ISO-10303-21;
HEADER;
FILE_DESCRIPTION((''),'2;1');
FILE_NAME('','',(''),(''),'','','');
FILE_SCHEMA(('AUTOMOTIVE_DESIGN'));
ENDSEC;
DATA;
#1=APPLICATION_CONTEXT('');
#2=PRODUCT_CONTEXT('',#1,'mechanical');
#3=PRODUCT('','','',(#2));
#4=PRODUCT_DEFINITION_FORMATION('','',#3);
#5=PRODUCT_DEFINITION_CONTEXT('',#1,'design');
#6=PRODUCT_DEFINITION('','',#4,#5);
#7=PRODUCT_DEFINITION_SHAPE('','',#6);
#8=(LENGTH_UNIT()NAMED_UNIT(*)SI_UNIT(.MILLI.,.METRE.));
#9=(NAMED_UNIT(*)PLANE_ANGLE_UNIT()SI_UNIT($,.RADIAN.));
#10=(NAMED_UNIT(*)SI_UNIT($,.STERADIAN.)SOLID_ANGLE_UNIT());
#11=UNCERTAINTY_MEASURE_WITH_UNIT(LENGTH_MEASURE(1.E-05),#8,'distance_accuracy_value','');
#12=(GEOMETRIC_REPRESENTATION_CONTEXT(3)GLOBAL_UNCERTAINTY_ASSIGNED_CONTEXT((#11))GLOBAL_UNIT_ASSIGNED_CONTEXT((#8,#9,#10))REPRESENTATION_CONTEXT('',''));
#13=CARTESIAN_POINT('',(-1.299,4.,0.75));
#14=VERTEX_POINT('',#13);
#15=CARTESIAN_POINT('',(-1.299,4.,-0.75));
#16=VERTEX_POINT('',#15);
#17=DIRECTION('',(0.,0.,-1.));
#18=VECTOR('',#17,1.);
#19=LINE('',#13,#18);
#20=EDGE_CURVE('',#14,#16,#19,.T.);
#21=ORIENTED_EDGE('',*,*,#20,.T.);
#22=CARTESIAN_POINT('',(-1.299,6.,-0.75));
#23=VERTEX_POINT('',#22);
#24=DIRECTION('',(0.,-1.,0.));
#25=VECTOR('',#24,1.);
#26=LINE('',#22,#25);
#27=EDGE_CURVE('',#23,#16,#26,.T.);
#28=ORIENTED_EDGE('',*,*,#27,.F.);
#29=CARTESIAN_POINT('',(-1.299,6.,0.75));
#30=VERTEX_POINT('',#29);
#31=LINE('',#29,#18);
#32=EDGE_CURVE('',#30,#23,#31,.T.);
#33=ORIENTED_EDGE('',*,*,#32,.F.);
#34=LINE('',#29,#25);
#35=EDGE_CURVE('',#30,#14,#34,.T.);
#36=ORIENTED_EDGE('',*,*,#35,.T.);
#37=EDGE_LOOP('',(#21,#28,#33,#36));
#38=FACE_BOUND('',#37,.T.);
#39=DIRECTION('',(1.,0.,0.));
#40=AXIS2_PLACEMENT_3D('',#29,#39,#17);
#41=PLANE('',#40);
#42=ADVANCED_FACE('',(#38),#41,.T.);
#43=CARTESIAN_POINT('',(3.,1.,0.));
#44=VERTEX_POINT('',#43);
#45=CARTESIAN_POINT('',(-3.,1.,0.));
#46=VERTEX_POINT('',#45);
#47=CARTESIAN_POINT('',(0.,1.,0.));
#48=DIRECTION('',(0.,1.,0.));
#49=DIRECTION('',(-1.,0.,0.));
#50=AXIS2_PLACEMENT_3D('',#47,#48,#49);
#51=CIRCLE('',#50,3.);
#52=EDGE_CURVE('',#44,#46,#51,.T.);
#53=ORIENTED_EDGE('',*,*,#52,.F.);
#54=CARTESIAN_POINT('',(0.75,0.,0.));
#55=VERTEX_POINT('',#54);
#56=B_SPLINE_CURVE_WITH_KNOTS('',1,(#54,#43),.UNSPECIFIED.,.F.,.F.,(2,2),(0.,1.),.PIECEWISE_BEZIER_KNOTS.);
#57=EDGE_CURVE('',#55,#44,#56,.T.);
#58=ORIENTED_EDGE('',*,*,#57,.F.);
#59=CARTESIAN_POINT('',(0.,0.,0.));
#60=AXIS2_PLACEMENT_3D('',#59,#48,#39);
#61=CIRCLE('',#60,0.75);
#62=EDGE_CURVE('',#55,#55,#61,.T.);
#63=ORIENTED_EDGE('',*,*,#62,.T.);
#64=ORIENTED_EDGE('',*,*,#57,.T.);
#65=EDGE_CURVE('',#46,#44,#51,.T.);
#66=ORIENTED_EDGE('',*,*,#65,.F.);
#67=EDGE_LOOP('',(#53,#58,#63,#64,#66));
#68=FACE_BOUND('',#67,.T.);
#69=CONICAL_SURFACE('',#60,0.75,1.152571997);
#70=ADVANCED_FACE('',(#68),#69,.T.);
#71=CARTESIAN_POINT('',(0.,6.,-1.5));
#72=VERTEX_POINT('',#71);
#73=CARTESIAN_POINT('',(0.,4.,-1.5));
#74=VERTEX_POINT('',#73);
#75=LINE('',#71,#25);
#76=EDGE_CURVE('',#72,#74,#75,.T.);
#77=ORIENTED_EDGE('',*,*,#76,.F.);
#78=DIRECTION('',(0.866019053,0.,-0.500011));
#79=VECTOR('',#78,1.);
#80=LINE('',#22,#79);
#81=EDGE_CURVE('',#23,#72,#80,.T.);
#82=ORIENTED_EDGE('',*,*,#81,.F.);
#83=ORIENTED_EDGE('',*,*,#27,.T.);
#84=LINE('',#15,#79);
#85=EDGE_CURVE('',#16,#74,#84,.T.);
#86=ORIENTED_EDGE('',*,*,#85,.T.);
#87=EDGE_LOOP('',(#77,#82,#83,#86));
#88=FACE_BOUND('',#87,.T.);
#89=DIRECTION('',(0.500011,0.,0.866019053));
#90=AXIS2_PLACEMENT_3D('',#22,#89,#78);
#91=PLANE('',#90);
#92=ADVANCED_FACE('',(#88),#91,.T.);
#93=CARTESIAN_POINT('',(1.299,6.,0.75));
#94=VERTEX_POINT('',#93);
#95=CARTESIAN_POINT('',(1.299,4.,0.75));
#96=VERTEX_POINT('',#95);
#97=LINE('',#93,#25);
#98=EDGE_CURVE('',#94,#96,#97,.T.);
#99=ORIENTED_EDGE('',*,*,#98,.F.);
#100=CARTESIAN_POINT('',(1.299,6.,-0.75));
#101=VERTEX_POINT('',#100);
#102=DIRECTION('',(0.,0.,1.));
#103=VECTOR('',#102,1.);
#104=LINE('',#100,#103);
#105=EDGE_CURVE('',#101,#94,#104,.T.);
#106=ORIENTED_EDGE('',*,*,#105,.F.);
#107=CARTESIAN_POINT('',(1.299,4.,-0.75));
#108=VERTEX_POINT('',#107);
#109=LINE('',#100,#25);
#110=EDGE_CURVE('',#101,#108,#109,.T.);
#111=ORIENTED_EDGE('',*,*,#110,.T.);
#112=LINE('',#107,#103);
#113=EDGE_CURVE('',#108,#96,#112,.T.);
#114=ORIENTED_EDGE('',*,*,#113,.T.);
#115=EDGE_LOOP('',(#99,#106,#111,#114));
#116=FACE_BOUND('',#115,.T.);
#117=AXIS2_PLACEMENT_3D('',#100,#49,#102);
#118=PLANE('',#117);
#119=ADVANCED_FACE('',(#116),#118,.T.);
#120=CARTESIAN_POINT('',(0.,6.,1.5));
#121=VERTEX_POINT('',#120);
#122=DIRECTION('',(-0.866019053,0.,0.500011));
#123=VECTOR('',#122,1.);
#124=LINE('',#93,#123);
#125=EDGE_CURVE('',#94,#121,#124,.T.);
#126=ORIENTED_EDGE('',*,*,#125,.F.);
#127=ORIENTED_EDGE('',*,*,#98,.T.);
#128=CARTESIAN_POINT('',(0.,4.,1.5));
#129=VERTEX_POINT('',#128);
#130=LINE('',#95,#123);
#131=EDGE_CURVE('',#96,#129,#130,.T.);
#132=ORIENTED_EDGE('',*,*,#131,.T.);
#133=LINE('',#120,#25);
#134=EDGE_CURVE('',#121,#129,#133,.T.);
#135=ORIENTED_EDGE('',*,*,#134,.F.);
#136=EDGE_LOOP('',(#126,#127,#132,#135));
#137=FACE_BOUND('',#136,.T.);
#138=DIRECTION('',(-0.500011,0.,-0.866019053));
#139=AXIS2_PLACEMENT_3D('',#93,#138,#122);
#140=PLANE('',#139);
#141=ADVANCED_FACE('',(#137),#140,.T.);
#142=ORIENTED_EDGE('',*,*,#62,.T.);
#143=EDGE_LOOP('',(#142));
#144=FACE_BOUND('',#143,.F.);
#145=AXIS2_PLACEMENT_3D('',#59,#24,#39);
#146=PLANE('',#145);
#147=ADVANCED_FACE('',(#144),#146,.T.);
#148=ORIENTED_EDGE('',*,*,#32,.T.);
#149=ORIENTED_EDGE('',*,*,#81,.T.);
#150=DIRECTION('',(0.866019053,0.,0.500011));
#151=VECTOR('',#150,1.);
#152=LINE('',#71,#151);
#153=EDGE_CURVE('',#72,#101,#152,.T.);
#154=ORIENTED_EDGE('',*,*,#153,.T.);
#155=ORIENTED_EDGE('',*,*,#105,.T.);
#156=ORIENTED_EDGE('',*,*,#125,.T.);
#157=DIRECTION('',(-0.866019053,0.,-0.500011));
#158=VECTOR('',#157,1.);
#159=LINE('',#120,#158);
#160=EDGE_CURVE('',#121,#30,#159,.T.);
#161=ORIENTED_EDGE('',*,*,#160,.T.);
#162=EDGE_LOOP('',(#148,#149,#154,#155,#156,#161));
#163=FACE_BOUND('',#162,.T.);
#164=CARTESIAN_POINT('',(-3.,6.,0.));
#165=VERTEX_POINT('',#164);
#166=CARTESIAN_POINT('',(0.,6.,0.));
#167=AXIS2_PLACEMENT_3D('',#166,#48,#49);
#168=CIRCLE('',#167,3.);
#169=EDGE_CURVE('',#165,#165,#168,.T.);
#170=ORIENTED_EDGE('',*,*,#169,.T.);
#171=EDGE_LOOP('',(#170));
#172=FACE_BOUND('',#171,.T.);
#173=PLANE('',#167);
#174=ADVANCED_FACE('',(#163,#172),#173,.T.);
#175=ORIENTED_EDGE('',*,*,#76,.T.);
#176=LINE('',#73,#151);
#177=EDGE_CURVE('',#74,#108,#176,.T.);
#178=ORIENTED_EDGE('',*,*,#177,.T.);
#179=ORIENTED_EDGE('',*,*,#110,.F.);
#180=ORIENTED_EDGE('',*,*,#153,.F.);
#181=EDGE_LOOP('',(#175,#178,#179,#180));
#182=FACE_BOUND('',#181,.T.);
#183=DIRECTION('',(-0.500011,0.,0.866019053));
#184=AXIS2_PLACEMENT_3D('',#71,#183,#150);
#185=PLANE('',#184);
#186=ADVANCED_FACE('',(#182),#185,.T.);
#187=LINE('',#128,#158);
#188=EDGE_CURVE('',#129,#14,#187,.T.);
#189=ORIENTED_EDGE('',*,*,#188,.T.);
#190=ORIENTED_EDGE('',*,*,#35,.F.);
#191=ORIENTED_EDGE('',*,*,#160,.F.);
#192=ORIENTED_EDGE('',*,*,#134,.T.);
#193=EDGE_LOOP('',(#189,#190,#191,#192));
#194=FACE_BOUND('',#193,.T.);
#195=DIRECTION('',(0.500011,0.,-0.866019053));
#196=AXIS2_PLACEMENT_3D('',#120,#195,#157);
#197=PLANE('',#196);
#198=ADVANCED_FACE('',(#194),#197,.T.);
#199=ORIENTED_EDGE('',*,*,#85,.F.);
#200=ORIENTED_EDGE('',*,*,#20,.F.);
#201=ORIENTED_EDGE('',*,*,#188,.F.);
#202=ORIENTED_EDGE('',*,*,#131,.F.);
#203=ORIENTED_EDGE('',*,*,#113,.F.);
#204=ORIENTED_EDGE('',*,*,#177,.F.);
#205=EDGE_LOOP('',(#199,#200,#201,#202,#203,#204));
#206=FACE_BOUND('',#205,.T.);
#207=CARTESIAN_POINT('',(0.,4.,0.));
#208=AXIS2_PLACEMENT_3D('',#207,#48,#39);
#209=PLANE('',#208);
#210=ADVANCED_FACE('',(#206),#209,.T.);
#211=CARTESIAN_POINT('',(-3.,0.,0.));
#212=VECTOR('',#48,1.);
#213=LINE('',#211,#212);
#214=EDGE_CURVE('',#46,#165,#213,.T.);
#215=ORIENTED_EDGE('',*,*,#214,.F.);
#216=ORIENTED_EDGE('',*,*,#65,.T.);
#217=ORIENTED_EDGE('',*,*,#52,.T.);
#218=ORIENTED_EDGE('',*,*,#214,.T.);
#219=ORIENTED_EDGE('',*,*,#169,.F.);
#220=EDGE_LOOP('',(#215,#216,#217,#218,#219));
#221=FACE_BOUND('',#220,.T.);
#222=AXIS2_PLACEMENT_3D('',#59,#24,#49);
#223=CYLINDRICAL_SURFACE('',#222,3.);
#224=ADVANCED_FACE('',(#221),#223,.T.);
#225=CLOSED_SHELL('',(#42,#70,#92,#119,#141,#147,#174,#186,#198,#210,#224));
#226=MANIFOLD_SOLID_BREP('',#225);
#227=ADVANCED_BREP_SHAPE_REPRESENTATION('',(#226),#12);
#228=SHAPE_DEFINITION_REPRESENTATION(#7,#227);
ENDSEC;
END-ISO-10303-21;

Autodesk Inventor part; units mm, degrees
ref_plane "YZ Plane" through (0, 0, 0) normal (1, 0, 0) x (0, 1, 0)
ref_plane "XZ Plane" through (0, 0, 0) normal (0, 1, 0) x (-1, 0, 0)
ref_plane "XY Plane" through (0, 0, 0) normal (0, 0, 1) x (1, 0, 0)
sketch "Sketch1" plane through (0, 0, 0) normal (0, 1, 0) x (-1, 0, 0)
  circle A0 centre (0, 0) radius 3
  dimension "d0" = 6
extrude "Extrusion1" add sketch "Sketch1" along normal blind 6
sketch "Sketch2" plane through (0, 0, 0) normal (0, -1, 0) x (1, 0, 0)
  circle A0 centre (0, 0) radius 0.75
  circle A1 centre (0, 0) radius 3
  dimension "d3" = 1.5
extrude "Extrusion2" cut sketch "Sketch2" against normal blind 1
loft "Loft1" add section 1 edges at (-0.75, 0, 0) section 2 edges at (3, 1, 0)
thread "Thread1" size "M6x0.75" class "6g" standard "ANSI Metric M Profile" full length
sketch "Sketch3" plane through (0, 6, 0) normal (0, 1, 0) x (1, 0, 0)
  line L0 (0, 0) -> (0, 1.5)
  line L1 (0, 1.5) -> (1.299, 0.75)
  line L2 (1.299, 0.75) -> (1.299, -0.75)
  line L3 (1.299, -0.75) -> (0, -1.5)
  line L4 (0, -1.5) -> (-1.299, -0.75)
  line L5 (-1.299, -0.75) -> (-1.299, 0.75)
  line L6 (-1.299, 0.75) -> (0, 1.5)
  dimension "d12" = 1.5
extrude "Extrusion3" cut sketch "Sketch3" against normal blind 2
properties part number "M6x6_DIN914"
